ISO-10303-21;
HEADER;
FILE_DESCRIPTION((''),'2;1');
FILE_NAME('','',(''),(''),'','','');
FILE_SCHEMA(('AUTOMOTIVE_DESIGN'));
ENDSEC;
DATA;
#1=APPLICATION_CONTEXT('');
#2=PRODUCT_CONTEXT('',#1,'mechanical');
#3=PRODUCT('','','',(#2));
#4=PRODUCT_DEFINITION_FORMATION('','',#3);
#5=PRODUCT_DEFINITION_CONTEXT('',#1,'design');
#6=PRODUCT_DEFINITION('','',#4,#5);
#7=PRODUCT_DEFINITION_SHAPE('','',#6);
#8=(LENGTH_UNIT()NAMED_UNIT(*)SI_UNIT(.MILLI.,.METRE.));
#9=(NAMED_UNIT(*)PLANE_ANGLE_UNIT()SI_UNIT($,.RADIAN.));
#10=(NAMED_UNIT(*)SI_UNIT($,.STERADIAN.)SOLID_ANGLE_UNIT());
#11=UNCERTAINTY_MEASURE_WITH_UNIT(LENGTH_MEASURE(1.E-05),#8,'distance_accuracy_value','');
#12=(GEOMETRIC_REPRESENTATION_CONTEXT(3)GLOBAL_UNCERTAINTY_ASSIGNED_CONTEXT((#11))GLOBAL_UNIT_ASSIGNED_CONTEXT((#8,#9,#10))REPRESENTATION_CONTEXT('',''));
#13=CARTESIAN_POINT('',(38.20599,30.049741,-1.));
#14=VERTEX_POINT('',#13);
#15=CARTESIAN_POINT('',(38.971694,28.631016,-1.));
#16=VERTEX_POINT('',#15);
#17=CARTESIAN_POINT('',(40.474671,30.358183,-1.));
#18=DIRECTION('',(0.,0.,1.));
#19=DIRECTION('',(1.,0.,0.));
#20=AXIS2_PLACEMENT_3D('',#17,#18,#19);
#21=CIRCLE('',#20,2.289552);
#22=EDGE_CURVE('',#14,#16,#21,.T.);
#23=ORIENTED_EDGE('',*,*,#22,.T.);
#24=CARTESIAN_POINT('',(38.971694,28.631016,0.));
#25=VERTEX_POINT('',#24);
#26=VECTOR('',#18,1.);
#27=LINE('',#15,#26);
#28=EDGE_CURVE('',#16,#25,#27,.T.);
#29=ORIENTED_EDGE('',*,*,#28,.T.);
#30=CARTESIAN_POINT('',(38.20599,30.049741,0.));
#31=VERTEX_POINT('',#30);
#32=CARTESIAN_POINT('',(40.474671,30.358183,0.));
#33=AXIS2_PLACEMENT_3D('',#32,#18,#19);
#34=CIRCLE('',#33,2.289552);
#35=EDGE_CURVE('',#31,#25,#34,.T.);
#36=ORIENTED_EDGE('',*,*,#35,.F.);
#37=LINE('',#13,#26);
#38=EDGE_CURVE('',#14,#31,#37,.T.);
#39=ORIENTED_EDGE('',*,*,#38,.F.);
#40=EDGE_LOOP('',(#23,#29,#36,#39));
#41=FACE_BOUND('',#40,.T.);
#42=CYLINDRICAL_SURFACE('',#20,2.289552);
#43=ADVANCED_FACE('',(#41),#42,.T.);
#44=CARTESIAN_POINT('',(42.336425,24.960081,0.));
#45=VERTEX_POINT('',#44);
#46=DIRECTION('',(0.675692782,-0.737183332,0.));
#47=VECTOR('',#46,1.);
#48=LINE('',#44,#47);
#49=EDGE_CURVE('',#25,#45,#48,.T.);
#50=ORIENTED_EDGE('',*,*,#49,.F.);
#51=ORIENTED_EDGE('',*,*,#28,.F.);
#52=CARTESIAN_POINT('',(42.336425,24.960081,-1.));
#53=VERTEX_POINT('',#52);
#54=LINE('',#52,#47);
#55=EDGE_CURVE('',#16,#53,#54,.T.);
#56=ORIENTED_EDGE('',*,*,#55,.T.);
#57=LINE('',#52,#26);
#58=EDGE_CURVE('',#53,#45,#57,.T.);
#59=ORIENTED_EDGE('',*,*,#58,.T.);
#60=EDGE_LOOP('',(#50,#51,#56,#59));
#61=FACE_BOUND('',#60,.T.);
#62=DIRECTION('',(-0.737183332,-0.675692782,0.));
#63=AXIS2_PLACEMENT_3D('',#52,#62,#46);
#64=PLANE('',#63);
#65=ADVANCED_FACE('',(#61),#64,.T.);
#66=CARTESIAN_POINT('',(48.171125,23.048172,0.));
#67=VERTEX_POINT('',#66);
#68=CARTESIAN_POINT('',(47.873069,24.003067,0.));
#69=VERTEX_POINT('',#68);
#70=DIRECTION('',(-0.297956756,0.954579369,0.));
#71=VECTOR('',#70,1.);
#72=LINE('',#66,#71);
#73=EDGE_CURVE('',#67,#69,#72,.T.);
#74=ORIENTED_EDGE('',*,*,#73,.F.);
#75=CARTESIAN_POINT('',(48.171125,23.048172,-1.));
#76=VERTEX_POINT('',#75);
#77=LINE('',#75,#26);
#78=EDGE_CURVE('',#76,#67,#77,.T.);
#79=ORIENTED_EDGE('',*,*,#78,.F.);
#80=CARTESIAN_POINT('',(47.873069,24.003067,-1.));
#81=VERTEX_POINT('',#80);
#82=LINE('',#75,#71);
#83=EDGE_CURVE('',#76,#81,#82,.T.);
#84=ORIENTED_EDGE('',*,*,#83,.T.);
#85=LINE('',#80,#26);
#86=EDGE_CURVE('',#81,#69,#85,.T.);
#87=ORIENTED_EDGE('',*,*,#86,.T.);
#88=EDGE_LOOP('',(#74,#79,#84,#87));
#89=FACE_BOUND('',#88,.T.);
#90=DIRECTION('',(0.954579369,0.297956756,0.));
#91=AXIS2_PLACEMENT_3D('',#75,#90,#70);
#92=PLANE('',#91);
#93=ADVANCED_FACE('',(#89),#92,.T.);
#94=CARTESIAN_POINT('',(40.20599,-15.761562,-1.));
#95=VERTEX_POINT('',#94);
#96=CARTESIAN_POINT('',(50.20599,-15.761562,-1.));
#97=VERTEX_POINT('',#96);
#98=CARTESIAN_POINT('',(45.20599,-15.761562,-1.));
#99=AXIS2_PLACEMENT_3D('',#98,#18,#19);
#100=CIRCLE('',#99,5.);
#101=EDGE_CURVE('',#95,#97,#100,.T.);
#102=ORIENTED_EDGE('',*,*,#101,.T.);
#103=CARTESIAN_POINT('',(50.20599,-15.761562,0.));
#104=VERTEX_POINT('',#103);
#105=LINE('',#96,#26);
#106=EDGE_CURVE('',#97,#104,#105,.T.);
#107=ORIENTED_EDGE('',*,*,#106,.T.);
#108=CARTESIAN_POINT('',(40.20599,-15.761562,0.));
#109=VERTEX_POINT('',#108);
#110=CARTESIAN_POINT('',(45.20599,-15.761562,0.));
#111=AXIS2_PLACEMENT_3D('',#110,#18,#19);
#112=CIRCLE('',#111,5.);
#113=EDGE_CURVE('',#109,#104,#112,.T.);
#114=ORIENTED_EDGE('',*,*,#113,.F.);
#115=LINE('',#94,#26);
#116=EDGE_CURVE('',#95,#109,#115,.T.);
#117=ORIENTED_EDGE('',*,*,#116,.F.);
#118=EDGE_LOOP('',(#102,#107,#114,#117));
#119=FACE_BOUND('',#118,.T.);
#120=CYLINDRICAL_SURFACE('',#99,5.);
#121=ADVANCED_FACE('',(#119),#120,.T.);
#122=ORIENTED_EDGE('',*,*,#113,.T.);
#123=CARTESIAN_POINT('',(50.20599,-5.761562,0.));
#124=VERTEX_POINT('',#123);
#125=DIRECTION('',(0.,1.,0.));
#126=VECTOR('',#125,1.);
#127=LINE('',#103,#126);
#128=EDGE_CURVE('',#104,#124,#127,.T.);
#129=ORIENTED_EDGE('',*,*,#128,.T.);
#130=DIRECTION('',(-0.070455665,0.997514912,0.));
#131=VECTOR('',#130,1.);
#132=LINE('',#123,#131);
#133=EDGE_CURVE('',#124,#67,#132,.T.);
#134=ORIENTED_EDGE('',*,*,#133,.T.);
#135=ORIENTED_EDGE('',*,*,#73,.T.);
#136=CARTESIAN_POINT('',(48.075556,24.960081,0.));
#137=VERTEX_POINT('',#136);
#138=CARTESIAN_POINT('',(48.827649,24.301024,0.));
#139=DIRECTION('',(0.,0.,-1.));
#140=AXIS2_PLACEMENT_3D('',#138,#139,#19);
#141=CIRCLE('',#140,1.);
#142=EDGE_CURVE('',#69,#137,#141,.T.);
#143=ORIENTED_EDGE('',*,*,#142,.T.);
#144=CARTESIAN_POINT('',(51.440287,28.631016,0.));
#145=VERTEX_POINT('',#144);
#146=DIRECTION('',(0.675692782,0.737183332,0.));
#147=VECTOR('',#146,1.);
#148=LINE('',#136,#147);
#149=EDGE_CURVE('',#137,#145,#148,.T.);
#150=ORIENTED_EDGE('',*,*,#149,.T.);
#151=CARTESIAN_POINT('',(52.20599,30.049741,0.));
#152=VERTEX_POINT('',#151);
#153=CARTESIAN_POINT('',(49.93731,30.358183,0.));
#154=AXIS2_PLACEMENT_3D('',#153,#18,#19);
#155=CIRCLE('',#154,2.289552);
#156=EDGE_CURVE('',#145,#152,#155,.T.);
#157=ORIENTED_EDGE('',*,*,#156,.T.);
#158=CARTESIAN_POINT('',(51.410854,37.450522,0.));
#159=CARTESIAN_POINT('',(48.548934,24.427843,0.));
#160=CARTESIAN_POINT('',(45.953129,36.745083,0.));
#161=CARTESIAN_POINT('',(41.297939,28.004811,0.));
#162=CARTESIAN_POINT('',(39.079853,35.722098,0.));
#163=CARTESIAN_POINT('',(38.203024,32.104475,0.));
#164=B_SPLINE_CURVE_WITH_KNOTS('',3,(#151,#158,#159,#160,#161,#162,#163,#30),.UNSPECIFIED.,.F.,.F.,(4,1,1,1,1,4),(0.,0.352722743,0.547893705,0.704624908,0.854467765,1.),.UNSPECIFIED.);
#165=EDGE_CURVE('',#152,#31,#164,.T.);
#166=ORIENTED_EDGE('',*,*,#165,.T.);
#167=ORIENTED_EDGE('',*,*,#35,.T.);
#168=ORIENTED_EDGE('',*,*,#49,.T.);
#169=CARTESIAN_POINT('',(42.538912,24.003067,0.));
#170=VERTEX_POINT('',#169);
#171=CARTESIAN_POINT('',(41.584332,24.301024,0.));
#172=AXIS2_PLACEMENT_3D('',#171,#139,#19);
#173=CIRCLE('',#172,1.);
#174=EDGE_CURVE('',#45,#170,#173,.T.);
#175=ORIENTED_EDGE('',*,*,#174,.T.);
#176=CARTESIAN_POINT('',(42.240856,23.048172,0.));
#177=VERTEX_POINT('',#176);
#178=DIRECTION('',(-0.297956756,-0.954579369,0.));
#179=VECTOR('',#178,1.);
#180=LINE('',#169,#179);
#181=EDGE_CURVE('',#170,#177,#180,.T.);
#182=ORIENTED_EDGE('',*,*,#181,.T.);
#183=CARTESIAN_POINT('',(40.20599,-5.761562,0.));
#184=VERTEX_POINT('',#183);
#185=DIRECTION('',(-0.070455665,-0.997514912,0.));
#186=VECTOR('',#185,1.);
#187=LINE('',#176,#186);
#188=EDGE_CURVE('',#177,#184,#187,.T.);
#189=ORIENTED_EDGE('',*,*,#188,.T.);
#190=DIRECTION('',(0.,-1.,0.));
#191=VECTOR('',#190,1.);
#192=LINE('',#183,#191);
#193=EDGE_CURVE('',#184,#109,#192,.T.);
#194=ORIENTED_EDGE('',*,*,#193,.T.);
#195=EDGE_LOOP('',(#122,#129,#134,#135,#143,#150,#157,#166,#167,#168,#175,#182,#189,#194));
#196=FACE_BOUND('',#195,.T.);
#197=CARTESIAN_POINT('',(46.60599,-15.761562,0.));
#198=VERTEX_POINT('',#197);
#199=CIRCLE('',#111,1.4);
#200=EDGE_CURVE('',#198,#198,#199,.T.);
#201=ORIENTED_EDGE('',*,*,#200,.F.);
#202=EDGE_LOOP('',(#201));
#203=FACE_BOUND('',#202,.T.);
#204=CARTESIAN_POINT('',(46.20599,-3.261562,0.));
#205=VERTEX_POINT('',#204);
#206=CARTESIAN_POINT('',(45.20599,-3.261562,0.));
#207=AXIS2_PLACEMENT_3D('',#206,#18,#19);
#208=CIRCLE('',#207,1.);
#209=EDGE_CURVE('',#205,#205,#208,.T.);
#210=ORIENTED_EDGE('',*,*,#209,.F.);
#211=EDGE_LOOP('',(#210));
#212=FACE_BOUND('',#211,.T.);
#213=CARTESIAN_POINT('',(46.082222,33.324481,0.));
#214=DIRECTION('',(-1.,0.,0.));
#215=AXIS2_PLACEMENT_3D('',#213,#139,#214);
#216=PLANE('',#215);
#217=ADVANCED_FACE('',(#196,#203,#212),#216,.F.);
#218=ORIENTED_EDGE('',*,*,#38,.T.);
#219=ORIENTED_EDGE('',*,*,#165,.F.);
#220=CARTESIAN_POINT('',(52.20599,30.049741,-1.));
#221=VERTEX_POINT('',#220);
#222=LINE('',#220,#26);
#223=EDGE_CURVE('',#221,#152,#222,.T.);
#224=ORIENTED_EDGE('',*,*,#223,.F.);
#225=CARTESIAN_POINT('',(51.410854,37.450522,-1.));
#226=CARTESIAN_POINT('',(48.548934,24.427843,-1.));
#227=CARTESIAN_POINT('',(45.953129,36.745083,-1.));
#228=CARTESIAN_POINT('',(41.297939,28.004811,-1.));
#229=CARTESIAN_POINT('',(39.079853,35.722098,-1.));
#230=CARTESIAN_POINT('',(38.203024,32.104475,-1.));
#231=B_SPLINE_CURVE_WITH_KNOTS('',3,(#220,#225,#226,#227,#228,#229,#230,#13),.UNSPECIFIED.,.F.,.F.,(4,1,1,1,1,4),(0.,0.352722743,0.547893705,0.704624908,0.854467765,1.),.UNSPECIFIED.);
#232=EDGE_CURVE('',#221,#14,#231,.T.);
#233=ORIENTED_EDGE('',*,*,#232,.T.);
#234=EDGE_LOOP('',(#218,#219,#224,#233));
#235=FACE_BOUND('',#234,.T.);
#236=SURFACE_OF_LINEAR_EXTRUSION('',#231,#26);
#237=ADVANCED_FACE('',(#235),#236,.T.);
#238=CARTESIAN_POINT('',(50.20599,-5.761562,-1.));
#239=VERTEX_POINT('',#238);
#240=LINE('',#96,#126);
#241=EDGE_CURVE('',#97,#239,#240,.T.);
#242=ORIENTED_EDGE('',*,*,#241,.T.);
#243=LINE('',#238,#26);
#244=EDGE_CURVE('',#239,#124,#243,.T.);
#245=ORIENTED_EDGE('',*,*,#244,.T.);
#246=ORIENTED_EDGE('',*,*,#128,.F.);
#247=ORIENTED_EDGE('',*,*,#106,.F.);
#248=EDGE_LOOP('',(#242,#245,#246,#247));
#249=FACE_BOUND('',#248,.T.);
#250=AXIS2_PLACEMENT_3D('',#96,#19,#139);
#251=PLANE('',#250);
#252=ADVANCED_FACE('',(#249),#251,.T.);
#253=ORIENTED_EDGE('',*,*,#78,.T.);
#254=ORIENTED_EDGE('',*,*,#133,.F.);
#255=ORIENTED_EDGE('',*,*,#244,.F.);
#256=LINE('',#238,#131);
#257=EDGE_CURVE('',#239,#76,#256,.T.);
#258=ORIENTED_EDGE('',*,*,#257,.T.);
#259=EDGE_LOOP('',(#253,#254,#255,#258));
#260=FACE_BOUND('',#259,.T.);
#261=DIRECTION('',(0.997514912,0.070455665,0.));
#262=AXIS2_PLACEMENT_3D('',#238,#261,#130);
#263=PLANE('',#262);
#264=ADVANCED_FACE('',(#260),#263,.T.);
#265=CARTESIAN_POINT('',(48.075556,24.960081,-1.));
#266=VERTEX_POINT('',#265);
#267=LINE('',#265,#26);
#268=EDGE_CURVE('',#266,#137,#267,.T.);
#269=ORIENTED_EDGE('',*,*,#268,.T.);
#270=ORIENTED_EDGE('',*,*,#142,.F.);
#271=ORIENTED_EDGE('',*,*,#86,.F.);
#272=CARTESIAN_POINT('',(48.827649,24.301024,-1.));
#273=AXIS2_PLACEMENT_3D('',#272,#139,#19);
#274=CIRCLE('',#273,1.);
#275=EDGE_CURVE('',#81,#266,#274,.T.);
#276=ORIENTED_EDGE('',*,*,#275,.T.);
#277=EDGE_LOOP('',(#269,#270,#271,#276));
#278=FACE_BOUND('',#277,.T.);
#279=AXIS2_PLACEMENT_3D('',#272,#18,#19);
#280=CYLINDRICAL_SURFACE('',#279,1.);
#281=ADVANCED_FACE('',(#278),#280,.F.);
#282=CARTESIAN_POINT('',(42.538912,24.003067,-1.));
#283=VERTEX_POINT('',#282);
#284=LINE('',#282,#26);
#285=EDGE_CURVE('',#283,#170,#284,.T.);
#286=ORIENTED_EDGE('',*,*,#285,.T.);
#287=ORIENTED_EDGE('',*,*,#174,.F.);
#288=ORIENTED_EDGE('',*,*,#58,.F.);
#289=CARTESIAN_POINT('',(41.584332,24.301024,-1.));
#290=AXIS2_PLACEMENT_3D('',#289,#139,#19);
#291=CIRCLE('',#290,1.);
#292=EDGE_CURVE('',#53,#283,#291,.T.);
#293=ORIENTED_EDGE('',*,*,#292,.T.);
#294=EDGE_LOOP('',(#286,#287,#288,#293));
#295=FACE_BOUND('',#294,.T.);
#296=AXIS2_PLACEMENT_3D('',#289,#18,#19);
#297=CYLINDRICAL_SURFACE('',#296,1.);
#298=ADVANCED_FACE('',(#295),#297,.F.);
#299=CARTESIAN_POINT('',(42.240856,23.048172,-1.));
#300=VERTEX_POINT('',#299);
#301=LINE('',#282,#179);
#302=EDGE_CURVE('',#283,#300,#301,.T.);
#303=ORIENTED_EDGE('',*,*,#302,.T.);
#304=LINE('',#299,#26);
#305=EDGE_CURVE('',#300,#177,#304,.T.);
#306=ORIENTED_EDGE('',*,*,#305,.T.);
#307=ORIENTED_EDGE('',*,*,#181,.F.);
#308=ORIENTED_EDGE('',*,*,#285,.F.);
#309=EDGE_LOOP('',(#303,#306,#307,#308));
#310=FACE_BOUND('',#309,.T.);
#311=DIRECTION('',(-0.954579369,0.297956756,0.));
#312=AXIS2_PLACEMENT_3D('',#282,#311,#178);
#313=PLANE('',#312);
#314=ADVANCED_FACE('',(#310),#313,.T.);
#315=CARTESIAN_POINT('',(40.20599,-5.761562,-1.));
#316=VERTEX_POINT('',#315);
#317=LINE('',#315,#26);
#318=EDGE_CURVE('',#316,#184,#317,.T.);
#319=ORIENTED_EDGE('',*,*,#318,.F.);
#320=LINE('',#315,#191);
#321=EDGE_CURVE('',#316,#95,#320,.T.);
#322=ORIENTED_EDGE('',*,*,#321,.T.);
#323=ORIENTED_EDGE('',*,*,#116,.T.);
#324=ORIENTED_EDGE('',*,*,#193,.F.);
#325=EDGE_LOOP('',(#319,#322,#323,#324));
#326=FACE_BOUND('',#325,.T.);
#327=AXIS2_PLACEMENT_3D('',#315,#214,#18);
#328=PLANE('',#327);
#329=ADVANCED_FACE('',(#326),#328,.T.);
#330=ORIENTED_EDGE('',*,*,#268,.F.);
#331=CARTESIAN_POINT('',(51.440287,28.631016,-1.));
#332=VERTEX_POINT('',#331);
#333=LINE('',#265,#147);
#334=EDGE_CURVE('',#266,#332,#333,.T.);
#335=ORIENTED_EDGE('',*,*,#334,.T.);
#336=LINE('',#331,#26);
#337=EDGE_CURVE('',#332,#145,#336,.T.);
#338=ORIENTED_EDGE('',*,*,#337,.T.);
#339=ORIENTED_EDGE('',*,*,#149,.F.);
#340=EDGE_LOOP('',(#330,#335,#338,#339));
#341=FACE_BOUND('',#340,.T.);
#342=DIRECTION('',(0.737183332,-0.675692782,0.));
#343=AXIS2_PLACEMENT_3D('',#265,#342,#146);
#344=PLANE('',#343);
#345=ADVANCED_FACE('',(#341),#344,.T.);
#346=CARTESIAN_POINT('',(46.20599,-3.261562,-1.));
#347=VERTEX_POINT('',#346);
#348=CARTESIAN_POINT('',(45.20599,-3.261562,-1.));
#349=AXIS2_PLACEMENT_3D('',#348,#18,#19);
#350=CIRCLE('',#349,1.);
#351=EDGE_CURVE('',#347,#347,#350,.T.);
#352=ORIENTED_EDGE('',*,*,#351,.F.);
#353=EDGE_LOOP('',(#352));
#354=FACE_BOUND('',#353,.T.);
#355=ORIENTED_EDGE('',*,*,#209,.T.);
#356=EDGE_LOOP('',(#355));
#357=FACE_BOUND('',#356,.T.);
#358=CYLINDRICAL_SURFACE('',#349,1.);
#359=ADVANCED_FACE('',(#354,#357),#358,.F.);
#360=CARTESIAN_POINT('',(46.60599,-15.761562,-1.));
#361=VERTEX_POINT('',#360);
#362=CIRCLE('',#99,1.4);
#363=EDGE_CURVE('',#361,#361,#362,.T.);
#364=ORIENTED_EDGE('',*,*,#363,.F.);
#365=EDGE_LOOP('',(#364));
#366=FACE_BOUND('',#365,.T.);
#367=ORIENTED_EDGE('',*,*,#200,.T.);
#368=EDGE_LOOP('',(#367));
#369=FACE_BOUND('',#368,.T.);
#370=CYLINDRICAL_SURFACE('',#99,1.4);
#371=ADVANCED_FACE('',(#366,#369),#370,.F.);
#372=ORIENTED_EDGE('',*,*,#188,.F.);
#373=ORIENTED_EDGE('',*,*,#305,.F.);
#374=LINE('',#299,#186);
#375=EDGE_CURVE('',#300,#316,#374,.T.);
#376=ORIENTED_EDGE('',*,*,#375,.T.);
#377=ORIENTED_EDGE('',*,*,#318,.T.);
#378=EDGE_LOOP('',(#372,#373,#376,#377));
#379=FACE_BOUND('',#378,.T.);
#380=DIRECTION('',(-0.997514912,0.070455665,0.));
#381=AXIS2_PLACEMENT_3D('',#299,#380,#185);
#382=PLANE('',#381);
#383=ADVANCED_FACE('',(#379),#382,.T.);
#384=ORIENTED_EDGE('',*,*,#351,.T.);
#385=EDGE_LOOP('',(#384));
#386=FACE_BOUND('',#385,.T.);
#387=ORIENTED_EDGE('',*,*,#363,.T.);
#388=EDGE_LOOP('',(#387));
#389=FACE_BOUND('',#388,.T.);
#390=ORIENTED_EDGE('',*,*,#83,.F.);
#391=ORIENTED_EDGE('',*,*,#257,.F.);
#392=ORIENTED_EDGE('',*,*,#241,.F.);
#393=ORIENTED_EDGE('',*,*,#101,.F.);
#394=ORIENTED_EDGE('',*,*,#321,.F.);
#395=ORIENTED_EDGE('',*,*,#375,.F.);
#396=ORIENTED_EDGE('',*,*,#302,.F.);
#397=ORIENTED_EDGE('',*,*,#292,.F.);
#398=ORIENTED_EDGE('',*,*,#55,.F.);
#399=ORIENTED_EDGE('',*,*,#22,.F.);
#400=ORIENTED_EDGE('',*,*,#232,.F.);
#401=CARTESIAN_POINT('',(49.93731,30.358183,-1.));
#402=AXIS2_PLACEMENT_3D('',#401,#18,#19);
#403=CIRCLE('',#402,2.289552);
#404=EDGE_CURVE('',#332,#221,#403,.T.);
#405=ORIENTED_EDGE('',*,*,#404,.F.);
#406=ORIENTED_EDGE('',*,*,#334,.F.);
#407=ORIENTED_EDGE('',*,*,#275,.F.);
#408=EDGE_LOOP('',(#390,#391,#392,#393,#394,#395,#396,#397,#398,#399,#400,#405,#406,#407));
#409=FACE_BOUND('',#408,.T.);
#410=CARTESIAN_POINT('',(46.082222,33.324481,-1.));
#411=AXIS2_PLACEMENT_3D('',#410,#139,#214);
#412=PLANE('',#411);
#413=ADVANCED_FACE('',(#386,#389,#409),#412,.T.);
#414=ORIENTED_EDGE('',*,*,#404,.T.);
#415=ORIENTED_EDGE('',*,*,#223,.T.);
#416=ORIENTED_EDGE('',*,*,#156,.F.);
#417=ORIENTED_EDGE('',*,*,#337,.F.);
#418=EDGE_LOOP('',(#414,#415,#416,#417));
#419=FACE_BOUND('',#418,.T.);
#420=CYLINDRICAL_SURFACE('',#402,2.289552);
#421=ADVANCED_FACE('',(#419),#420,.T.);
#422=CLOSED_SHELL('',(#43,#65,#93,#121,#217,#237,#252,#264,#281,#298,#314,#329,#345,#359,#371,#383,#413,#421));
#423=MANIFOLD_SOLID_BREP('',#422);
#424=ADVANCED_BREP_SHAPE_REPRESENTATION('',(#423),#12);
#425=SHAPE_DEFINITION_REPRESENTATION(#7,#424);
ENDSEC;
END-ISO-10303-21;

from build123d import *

# Parameters (mm, degrees)
MODEL_R           = 1
MODEL_R_2         = 1.4
BRIDA_BASE1_DEPTH = 1


# Sheet-metal steps are written as plain solids
with BuildPart() as part:
    # Model → Brida base1 (new body)
    with BuildSketch(Plane.XY):
        with BuildLine():
            Line((48.075555852, 24.960081428), (51.440287205, 28.631015815))
            ThreePointArc((51.440287205, 28.631015815), (51.952141408, 29.270754129), (52.2059904, 30.049740987))
            add(Edge.make_bspline(
                [(52.2059904, 30.049740987), (51.410853999, 37.450521911), (48.548934386, 24.427843185), (45.953129078, 36.745083032), (41.297938997, 28.004810972), (39.079853451, 35.722098329), (38.203024341, 32.104474877), (38.2059904, 30.049740987)],
                knots=[0, 0, 0, 0, 0.352722743, 0.547893705, 0.704624908, 0.854467765, 1, 1, 1, 1], degree=3))
            ThreePointArc((38.2059904, 30.049740987), (38.459839392, 29.270754129), (38.971693595, 28.631015815))
            Line((38.971693595, 28.631015815), (42.336424948, 24.960081428))
            ThreePointArc((42.336424948, 24.960081428), (42.562673339, 24.508023196), (42.538911562, 24.0030674))
            Line((42.538911562, 24.0030674), (42.240856149, 23.048171958))
            Line((42.240856149, 23.048171958), (40.2059904, -5.7615616))
            Line((40.2059904, -5.7615616), (40.2059904, -15.7615616))
            ThreePointArc((40.2059904, -15.7615616), (45.2059904, -20.7615616), (50.2059904, -15.7615616))
            Line((50.2059904, -15.7615616), (50.2059904, -5.7615616))
            Line((50.2059904, -5.7615616), (48.171124651, 23.048171958))
            Line((48.171124651, 23.048171958), (47.873069238, 24.0030674))
            ThreePointArc((47.873069238, 24.0030674), (47.849307461, 24.508023196), (48.075555852, 24.960081428))
        make_face()
        with Locations((45.2059904, -3.2615616)):
            Circle(MODEL_R, mode=Mode.SUBTRACT)
        with Locations((45.2059904, -15.7615616)):
            Circle(MODEL_R_2, mode=Mode.SUBTRACT)
    extrude(amount=-BRIDA_BASE1_DEPTH)


solid = part.part
